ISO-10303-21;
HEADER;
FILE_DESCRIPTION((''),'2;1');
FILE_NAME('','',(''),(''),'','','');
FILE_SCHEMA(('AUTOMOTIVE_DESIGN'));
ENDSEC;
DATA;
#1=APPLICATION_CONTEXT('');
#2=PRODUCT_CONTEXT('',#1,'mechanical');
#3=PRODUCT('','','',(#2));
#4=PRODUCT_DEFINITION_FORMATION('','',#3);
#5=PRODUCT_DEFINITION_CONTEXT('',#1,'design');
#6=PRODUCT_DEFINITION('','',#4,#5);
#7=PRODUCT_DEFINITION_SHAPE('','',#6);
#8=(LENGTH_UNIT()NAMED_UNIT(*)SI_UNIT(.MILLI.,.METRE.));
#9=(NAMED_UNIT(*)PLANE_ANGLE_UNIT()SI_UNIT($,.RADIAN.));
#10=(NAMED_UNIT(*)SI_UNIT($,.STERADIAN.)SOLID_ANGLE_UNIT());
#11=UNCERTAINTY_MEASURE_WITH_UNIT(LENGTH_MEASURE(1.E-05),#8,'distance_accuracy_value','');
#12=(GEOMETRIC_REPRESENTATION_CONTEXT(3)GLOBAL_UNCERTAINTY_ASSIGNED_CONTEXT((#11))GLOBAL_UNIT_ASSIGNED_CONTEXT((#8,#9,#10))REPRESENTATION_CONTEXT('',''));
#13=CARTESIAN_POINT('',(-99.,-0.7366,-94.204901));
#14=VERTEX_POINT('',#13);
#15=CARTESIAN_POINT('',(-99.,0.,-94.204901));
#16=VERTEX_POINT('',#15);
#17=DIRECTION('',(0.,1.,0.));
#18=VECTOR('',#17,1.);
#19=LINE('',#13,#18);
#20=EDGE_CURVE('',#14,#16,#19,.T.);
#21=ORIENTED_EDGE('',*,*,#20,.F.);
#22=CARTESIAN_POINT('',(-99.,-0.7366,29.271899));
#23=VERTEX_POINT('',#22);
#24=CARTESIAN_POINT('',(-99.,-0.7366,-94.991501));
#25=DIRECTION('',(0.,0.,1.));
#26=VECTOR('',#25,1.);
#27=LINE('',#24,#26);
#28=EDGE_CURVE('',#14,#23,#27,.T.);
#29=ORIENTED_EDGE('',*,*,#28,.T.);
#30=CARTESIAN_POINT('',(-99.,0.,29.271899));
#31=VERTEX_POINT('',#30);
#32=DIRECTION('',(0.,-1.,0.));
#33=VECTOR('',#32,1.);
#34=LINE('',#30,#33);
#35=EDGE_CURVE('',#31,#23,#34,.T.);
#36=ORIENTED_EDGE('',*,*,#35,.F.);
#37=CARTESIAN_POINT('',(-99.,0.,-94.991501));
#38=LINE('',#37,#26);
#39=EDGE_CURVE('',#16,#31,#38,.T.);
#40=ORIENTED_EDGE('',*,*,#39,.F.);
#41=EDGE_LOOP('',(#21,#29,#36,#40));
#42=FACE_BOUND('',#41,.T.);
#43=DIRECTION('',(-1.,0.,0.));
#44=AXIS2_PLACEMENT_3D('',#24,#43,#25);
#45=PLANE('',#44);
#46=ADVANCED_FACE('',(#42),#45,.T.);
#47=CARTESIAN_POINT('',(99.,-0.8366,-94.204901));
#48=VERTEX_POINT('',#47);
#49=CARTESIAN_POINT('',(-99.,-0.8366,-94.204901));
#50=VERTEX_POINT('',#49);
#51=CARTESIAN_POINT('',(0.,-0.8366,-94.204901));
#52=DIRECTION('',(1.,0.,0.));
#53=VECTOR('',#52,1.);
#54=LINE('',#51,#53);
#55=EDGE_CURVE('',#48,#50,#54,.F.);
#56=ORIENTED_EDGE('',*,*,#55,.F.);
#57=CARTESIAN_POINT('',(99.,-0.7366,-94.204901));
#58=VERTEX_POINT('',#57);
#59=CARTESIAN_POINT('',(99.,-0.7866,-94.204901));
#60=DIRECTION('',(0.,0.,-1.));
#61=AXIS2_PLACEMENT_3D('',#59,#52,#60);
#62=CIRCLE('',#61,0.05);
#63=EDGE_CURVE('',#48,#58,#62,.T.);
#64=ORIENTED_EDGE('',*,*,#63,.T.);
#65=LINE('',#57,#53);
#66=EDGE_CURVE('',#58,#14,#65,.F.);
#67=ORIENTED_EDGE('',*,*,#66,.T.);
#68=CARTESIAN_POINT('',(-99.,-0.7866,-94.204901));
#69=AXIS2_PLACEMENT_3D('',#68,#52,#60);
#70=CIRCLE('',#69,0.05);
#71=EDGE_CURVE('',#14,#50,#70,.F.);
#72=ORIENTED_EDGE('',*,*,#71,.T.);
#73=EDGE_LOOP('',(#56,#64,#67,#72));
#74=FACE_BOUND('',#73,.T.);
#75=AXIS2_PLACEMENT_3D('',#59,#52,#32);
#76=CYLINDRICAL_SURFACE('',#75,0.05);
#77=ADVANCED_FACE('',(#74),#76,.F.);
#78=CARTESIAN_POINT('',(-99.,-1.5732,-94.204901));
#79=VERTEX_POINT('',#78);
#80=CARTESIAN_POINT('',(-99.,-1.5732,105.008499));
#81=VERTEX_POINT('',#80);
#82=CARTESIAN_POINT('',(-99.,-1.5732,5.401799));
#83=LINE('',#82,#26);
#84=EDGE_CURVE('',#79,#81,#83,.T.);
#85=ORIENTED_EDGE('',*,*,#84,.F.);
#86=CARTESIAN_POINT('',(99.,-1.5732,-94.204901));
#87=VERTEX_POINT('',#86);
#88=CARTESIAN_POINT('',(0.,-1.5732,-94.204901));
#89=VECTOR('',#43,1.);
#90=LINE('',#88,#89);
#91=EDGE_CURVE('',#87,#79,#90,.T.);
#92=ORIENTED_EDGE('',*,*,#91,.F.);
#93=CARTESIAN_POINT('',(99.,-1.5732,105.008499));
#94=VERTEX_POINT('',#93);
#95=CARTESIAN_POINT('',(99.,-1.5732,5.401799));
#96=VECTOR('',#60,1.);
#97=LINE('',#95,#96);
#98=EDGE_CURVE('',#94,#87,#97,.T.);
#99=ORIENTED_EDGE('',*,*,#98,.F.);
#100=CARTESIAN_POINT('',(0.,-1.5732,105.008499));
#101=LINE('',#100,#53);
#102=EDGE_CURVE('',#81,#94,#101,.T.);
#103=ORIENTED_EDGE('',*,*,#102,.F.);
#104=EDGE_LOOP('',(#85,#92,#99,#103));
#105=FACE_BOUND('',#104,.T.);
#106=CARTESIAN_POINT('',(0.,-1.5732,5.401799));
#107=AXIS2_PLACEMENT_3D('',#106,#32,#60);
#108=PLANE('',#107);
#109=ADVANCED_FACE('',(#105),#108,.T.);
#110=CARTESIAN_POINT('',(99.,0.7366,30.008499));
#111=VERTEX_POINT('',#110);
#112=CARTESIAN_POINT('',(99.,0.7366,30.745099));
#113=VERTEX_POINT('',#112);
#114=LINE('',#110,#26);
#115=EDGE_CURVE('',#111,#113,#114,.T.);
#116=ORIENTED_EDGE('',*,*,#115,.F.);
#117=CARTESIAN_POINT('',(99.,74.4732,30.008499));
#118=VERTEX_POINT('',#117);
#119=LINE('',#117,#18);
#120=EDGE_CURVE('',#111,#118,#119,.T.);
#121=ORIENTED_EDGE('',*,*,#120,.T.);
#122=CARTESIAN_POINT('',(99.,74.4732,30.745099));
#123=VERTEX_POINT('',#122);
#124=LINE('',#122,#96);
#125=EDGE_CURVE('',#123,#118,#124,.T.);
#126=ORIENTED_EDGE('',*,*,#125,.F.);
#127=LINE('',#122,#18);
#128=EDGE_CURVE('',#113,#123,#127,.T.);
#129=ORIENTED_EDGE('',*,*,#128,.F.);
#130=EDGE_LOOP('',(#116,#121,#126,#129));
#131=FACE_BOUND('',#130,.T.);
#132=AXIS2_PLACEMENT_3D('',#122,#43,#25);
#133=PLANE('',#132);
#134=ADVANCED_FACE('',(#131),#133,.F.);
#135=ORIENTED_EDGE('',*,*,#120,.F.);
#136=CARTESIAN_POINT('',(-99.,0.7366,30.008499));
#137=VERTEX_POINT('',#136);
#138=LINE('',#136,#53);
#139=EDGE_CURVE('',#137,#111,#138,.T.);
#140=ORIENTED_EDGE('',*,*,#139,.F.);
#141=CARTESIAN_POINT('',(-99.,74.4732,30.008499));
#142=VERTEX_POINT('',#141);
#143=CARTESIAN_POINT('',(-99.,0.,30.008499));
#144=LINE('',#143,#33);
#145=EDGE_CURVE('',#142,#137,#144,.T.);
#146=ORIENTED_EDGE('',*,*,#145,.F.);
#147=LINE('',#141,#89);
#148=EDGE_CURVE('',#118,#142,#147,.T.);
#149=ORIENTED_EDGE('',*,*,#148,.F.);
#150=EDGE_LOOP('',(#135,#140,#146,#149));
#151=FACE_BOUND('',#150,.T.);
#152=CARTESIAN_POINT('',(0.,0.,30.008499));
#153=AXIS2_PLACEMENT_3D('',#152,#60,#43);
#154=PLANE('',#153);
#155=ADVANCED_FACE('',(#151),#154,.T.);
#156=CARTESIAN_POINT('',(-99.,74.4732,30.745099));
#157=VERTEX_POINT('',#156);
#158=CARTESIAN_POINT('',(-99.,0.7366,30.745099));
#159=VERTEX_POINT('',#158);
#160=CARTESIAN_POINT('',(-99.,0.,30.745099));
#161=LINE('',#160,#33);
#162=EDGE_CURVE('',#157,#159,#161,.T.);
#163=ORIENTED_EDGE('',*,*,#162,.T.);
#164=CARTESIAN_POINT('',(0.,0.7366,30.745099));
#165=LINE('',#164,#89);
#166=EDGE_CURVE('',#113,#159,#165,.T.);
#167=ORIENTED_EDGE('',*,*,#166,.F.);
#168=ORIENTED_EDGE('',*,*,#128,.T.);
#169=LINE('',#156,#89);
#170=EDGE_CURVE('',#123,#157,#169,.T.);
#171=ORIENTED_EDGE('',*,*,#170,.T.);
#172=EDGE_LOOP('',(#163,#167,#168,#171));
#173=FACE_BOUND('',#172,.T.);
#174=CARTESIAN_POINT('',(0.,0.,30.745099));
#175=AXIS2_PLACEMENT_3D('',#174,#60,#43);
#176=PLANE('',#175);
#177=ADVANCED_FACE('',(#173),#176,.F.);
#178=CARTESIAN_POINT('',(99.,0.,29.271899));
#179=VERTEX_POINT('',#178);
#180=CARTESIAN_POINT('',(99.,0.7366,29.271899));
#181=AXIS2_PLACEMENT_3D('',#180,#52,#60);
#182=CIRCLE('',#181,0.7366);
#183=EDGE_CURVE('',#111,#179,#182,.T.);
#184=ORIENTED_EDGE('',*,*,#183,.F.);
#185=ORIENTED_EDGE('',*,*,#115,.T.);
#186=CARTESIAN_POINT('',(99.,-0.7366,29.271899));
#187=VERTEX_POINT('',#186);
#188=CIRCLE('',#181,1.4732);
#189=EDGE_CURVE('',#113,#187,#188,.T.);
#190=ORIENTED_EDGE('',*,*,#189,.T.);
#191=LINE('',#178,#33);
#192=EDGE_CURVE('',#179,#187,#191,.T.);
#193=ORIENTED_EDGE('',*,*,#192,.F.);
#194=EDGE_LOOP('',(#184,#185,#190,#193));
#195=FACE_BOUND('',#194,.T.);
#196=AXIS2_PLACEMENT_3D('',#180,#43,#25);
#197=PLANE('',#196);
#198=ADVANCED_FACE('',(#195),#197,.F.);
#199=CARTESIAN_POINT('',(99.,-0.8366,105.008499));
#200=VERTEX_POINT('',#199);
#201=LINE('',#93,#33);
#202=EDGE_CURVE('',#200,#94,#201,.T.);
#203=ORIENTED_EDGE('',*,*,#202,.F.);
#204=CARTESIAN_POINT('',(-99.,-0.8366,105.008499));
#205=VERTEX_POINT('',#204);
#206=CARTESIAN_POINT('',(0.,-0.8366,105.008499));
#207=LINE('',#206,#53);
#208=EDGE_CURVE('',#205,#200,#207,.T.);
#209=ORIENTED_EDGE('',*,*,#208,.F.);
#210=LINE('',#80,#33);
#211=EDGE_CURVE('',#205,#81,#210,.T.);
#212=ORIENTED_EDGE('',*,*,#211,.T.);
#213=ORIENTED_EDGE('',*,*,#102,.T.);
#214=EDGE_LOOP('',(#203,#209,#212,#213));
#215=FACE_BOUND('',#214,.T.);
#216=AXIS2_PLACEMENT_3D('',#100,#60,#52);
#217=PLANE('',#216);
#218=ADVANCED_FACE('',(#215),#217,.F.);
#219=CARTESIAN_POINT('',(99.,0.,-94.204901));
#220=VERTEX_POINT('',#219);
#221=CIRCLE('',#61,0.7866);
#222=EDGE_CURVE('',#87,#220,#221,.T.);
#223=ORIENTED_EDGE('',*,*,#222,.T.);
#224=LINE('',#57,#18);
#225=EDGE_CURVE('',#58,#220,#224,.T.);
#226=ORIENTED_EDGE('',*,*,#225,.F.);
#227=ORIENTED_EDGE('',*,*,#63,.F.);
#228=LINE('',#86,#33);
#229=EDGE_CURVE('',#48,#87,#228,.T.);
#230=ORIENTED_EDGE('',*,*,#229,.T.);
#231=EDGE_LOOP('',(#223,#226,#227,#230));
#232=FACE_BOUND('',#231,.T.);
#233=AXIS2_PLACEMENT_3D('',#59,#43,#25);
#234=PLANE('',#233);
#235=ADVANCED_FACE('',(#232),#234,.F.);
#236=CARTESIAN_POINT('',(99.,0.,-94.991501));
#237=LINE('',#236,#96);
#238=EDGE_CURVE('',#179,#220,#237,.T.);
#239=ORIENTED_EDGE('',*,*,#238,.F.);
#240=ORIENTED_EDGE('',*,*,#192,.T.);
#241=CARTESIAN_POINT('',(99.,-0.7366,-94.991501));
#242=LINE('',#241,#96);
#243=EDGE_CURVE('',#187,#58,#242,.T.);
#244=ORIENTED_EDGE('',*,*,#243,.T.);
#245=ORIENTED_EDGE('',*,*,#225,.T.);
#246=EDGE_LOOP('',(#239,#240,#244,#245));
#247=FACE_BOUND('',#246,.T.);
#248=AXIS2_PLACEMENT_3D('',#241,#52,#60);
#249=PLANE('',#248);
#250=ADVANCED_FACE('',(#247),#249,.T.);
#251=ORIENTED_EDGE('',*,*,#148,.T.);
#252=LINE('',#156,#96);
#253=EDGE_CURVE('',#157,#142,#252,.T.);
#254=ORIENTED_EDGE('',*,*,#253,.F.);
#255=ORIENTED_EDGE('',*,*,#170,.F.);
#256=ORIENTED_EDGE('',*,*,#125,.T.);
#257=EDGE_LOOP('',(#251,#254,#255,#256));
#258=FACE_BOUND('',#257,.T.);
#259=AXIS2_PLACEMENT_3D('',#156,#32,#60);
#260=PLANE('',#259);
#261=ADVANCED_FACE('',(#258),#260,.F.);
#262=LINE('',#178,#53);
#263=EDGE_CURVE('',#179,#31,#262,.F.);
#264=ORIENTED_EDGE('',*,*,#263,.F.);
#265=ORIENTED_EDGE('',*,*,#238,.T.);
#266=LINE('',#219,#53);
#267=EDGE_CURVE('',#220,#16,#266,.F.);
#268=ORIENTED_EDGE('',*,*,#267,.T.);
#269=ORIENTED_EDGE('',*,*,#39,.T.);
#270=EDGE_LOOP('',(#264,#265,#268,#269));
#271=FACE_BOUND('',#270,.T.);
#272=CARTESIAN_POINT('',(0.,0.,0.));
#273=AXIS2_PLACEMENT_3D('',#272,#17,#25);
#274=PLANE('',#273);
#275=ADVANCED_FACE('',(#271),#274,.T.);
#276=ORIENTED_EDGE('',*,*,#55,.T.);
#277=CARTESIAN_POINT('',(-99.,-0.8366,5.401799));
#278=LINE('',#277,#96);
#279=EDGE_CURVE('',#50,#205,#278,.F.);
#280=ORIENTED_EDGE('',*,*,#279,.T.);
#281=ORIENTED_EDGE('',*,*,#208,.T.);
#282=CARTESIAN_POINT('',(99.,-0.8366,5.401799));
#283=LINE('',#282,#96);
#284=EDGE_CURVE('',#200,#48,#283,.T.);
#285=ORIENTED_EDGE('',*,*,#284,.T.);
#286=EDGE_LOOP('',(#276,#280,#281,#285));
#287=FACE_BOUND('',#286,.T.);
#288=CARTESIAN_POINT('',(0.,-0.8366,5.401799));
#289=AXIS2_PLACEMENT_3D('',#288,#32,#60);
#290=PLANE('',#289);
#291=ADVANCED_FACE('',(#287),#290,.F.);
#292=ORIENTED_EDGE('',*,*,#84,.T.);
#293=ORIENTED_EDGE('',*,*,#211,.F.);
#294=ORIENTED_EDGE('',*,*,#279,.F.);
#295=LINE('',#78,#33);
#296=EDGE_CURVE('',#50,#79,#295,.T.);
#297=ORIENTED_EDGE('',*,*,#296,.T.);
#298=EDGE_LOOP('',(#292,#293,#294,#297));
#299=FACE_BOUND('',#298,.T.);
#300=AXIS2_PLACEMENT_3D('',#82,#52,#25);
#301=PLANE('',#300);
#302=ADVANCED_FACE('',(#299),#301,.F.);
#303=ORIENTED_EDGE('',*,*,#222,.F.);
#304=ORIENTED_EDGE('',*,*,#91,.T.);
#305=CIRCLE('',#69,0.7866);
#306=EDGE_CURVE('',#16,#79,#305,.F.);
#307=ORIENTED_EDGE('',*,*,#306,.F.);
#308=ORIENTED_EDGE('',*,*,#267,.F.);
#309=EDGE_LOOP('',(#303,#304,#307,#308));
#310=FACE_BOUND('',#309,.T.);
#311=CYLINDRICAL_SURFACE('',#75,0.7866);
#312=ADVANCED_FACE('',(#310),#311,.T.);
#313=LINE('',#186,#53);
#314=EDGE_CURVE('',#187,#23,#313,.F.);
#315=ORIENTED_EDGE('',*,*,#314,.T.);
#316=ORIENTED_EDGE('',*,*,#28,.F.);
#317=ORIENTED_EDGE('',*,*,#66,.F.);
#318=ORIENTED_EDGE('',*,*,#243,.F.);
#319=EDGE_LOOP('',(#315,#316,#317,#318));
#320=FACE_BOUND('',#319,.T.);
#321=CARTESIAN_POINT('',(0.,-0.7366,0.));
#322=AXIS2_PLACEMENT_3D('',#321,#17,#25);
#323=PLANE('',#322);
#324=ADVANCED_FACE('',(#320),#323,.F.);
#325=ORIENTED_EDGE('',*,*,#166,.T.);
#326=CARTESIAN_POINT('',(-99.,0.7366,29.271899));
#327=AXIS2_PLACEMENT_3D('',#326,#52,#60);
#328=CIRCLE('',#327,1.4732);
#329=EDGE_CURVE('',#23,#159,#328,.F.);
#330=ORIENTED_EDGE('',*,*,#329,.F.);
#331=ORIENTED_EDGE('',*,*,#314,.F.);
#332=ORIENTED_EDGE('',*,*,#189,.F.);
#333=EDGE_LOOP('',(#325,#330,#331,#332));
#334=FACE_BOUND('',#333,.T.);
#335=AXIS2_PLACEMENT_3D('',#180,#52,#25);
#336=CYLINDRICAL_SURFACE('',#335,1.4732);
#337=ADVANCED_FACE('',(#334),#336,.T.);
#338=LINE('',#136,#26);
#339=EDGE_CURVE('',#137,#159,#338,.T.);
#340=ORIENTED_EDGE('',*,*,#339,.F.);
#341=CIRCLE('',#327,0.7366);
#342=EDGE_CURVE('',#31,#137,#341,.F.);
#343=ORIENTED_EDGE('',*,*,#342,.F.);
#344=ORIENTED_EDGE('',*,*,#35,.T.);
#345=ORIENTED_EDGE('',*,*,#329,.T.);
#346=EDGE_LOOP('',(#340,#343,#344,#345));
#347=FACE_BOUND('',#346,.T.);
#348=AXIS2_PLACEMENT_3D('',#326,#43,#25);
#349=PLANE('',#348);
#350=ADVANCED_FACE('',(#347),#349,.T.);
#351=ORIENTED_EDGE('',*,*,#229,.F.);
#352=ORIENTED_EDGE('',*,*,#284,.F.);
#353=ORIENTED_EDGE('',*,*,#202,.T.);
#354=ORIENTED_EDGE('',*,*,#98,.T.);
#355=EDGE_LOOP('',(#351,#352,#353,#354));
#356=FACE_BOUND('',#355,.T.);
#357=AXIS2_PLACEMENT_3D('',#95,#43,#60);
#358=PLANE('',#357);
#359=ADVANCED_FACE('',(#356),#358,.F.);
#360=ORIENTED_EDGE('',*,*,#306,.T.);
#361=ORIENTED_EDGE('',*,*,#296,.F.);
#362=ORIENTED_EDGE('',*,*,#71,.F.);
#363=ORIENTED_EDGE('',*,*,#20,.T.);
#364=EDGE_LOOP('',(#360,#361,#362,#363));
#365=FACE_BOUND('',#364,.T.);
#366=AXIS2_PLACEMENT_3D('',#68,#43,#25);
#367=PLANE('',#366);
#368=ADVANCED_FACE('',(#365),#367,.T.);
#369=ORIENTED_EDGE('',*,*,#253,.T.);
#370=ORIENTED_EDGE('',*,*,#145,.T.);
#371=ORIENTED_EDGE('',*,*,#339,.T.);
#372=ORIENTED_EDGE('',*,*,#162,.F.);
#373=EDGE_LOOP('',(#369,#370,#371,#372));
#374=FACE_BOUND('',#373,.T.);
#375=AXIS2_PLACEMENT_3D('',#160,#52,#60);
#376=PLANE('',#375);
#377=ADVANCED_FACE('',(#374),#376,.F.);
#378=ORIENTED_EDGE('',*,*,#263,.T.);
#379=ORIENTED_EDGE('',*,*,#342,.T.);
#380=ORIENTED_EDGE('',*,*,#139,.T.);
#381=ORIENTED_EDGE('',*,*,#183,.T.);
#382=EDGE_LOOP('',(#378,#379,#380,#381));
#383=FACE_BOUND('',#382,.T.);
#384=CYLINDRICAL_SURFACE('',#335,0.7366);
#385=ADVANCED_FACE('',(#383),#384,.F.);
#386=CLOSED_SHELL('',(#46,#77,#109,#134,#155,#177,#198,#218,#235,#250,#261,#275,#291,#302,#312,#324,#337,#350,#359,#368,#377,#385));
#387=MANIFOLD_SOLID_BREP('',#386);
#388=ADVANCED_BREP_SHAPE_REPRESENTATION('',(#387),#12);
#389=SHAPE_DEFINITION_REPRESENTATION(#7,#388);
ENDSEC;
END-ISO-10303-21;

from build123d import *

# Parameters (mm, degrees)
SKETCH1_W                    = 198
SKETCH1_H                    = 125
BASE_FLANGE1_DEPTH           = 0.7366
EDGE_FLANGE1_STRIP_W         = 4.4196
EDGE_FLANGE1_STRIP_H         = 0.7366
EDGE_FLANGE1_STRIP_CUT_DEPTH = 198
EDGE_FLANGE1_DEPTH           = 198
HEM1_START                   = -99
HEM1_DEPTH                   = 198
HEM1_2_DEPTH                 = 198


with BuildPart() as part:
    # Base-Flange1: sheet metal written as solids
    # Sketch1 → Base-Flange1 (new body)
    with BuildSketch(Plane(origin=(0, 0, 0), x_dir=(1, 0, 0), z_dir=(0, 1, 0))):
        with Locations((0, 32.491501416)):
            Rectangle(SKETCH1_W, SKETCH1_H)
    extrude(amount=-BASE_FLANGE1_DEPTH)

    # Edge-Flange1: sheet metal written as solids
    # Edge-Flange1 strip (on a plane across the edge) → Edge-Flange1 strip cut (cut)
    with BuildSketch(Plane(origin=(-99, 0, 30.008498584), x_dir=(0, 0, -1), z_dir=(1, 0, 0))):
        with Locations((-1.4732, -0.3683)):
            Rectangle(EDGE_FLANGE1_STRIP_W, EDGE_FLANGE1_STRIP_H)
    extrude(amount=EDGE_FLANGE1_STRIP_CUT_DEPTH, mode=Mode.SUBTRACT)

    # Edge-Flange1 section (on a plane across the edge) → Edge-Flange1 (add)
    with BuildSketch(Plane(origin=(-99, 0, 30.008498584), x_dir=(0, 0, -1), z_dir=(1, 0, 0))):
        with BuildLine():
            Line((-0.7366, 0.7366), (-0.7366, 74.4732))
            Line((-0.7366, 74.4732), (0, 74.4732))
            Line((0, 74.4732), (0, 0.7366))
            ThreePointArc((0, 0.7366), (0.215745145, 0.215745145), (0.7366, 0))
            Line((0.7366, 0), (0.7366, -0.7366))
            ThreePointArc((0.7366, -0.7366), (-0.30510971, -0.30510971), (-0.7366, 0.7366))
        make_face()
    extrude(amount=EDGE_FLANGE1_DEPTH)

    # Hem1: read off the stored shape, not the designer's step
    # Hem1 outline → Hem1 (cut)
    with BuildSketch(Plane.YZ.offset(HEM1_START)):
        with BuildLine():
            ThreePointArc((0, -94.204901416), (-0.212984467, -94.743143722), (-0.7366, -94.98991069))
            Line((-0.7366, -94.98991069), (-0.7366, -94.991501416))
            Line((-0.7366, -94.991501416), (0, -94.991501416))
            Line((0, -94.991501416), (0, -94.204901416))
        make_face()
    extrude(amount=HEM1_DEPTH, mode=Mode.SUBTRACT)

    # Hem1 2 outline → Hem1 2 (add)
    with BuildSketch(Plane.YZ.offset(HEM1_START)):
        with BuildLine():
            Line((-0.8366, 105.008498584), (-1.5732, 105.008498584))
            Line((-1.5732, 105.008498584), (-1.5732, -94.204901416))
            ThreePointArc((-1.5732, -94.204901416), (-1.324842306, -94.778516949), (-0.7366, -94.98991069))
            Line((-0.7366, -94.98991069), (-0.7366, -94.204901416))
            ThreePointArc((-0.7366, -94.204901416), (-0.7866, -94.254901416), (-0.8366, -94.204901416))
            Line((-0.8366, -94.204901416), (-0.8366, 105.008498584))
        make_face()
    extrude(amount=HEM1_2_DEPTH)


solid = part.part
